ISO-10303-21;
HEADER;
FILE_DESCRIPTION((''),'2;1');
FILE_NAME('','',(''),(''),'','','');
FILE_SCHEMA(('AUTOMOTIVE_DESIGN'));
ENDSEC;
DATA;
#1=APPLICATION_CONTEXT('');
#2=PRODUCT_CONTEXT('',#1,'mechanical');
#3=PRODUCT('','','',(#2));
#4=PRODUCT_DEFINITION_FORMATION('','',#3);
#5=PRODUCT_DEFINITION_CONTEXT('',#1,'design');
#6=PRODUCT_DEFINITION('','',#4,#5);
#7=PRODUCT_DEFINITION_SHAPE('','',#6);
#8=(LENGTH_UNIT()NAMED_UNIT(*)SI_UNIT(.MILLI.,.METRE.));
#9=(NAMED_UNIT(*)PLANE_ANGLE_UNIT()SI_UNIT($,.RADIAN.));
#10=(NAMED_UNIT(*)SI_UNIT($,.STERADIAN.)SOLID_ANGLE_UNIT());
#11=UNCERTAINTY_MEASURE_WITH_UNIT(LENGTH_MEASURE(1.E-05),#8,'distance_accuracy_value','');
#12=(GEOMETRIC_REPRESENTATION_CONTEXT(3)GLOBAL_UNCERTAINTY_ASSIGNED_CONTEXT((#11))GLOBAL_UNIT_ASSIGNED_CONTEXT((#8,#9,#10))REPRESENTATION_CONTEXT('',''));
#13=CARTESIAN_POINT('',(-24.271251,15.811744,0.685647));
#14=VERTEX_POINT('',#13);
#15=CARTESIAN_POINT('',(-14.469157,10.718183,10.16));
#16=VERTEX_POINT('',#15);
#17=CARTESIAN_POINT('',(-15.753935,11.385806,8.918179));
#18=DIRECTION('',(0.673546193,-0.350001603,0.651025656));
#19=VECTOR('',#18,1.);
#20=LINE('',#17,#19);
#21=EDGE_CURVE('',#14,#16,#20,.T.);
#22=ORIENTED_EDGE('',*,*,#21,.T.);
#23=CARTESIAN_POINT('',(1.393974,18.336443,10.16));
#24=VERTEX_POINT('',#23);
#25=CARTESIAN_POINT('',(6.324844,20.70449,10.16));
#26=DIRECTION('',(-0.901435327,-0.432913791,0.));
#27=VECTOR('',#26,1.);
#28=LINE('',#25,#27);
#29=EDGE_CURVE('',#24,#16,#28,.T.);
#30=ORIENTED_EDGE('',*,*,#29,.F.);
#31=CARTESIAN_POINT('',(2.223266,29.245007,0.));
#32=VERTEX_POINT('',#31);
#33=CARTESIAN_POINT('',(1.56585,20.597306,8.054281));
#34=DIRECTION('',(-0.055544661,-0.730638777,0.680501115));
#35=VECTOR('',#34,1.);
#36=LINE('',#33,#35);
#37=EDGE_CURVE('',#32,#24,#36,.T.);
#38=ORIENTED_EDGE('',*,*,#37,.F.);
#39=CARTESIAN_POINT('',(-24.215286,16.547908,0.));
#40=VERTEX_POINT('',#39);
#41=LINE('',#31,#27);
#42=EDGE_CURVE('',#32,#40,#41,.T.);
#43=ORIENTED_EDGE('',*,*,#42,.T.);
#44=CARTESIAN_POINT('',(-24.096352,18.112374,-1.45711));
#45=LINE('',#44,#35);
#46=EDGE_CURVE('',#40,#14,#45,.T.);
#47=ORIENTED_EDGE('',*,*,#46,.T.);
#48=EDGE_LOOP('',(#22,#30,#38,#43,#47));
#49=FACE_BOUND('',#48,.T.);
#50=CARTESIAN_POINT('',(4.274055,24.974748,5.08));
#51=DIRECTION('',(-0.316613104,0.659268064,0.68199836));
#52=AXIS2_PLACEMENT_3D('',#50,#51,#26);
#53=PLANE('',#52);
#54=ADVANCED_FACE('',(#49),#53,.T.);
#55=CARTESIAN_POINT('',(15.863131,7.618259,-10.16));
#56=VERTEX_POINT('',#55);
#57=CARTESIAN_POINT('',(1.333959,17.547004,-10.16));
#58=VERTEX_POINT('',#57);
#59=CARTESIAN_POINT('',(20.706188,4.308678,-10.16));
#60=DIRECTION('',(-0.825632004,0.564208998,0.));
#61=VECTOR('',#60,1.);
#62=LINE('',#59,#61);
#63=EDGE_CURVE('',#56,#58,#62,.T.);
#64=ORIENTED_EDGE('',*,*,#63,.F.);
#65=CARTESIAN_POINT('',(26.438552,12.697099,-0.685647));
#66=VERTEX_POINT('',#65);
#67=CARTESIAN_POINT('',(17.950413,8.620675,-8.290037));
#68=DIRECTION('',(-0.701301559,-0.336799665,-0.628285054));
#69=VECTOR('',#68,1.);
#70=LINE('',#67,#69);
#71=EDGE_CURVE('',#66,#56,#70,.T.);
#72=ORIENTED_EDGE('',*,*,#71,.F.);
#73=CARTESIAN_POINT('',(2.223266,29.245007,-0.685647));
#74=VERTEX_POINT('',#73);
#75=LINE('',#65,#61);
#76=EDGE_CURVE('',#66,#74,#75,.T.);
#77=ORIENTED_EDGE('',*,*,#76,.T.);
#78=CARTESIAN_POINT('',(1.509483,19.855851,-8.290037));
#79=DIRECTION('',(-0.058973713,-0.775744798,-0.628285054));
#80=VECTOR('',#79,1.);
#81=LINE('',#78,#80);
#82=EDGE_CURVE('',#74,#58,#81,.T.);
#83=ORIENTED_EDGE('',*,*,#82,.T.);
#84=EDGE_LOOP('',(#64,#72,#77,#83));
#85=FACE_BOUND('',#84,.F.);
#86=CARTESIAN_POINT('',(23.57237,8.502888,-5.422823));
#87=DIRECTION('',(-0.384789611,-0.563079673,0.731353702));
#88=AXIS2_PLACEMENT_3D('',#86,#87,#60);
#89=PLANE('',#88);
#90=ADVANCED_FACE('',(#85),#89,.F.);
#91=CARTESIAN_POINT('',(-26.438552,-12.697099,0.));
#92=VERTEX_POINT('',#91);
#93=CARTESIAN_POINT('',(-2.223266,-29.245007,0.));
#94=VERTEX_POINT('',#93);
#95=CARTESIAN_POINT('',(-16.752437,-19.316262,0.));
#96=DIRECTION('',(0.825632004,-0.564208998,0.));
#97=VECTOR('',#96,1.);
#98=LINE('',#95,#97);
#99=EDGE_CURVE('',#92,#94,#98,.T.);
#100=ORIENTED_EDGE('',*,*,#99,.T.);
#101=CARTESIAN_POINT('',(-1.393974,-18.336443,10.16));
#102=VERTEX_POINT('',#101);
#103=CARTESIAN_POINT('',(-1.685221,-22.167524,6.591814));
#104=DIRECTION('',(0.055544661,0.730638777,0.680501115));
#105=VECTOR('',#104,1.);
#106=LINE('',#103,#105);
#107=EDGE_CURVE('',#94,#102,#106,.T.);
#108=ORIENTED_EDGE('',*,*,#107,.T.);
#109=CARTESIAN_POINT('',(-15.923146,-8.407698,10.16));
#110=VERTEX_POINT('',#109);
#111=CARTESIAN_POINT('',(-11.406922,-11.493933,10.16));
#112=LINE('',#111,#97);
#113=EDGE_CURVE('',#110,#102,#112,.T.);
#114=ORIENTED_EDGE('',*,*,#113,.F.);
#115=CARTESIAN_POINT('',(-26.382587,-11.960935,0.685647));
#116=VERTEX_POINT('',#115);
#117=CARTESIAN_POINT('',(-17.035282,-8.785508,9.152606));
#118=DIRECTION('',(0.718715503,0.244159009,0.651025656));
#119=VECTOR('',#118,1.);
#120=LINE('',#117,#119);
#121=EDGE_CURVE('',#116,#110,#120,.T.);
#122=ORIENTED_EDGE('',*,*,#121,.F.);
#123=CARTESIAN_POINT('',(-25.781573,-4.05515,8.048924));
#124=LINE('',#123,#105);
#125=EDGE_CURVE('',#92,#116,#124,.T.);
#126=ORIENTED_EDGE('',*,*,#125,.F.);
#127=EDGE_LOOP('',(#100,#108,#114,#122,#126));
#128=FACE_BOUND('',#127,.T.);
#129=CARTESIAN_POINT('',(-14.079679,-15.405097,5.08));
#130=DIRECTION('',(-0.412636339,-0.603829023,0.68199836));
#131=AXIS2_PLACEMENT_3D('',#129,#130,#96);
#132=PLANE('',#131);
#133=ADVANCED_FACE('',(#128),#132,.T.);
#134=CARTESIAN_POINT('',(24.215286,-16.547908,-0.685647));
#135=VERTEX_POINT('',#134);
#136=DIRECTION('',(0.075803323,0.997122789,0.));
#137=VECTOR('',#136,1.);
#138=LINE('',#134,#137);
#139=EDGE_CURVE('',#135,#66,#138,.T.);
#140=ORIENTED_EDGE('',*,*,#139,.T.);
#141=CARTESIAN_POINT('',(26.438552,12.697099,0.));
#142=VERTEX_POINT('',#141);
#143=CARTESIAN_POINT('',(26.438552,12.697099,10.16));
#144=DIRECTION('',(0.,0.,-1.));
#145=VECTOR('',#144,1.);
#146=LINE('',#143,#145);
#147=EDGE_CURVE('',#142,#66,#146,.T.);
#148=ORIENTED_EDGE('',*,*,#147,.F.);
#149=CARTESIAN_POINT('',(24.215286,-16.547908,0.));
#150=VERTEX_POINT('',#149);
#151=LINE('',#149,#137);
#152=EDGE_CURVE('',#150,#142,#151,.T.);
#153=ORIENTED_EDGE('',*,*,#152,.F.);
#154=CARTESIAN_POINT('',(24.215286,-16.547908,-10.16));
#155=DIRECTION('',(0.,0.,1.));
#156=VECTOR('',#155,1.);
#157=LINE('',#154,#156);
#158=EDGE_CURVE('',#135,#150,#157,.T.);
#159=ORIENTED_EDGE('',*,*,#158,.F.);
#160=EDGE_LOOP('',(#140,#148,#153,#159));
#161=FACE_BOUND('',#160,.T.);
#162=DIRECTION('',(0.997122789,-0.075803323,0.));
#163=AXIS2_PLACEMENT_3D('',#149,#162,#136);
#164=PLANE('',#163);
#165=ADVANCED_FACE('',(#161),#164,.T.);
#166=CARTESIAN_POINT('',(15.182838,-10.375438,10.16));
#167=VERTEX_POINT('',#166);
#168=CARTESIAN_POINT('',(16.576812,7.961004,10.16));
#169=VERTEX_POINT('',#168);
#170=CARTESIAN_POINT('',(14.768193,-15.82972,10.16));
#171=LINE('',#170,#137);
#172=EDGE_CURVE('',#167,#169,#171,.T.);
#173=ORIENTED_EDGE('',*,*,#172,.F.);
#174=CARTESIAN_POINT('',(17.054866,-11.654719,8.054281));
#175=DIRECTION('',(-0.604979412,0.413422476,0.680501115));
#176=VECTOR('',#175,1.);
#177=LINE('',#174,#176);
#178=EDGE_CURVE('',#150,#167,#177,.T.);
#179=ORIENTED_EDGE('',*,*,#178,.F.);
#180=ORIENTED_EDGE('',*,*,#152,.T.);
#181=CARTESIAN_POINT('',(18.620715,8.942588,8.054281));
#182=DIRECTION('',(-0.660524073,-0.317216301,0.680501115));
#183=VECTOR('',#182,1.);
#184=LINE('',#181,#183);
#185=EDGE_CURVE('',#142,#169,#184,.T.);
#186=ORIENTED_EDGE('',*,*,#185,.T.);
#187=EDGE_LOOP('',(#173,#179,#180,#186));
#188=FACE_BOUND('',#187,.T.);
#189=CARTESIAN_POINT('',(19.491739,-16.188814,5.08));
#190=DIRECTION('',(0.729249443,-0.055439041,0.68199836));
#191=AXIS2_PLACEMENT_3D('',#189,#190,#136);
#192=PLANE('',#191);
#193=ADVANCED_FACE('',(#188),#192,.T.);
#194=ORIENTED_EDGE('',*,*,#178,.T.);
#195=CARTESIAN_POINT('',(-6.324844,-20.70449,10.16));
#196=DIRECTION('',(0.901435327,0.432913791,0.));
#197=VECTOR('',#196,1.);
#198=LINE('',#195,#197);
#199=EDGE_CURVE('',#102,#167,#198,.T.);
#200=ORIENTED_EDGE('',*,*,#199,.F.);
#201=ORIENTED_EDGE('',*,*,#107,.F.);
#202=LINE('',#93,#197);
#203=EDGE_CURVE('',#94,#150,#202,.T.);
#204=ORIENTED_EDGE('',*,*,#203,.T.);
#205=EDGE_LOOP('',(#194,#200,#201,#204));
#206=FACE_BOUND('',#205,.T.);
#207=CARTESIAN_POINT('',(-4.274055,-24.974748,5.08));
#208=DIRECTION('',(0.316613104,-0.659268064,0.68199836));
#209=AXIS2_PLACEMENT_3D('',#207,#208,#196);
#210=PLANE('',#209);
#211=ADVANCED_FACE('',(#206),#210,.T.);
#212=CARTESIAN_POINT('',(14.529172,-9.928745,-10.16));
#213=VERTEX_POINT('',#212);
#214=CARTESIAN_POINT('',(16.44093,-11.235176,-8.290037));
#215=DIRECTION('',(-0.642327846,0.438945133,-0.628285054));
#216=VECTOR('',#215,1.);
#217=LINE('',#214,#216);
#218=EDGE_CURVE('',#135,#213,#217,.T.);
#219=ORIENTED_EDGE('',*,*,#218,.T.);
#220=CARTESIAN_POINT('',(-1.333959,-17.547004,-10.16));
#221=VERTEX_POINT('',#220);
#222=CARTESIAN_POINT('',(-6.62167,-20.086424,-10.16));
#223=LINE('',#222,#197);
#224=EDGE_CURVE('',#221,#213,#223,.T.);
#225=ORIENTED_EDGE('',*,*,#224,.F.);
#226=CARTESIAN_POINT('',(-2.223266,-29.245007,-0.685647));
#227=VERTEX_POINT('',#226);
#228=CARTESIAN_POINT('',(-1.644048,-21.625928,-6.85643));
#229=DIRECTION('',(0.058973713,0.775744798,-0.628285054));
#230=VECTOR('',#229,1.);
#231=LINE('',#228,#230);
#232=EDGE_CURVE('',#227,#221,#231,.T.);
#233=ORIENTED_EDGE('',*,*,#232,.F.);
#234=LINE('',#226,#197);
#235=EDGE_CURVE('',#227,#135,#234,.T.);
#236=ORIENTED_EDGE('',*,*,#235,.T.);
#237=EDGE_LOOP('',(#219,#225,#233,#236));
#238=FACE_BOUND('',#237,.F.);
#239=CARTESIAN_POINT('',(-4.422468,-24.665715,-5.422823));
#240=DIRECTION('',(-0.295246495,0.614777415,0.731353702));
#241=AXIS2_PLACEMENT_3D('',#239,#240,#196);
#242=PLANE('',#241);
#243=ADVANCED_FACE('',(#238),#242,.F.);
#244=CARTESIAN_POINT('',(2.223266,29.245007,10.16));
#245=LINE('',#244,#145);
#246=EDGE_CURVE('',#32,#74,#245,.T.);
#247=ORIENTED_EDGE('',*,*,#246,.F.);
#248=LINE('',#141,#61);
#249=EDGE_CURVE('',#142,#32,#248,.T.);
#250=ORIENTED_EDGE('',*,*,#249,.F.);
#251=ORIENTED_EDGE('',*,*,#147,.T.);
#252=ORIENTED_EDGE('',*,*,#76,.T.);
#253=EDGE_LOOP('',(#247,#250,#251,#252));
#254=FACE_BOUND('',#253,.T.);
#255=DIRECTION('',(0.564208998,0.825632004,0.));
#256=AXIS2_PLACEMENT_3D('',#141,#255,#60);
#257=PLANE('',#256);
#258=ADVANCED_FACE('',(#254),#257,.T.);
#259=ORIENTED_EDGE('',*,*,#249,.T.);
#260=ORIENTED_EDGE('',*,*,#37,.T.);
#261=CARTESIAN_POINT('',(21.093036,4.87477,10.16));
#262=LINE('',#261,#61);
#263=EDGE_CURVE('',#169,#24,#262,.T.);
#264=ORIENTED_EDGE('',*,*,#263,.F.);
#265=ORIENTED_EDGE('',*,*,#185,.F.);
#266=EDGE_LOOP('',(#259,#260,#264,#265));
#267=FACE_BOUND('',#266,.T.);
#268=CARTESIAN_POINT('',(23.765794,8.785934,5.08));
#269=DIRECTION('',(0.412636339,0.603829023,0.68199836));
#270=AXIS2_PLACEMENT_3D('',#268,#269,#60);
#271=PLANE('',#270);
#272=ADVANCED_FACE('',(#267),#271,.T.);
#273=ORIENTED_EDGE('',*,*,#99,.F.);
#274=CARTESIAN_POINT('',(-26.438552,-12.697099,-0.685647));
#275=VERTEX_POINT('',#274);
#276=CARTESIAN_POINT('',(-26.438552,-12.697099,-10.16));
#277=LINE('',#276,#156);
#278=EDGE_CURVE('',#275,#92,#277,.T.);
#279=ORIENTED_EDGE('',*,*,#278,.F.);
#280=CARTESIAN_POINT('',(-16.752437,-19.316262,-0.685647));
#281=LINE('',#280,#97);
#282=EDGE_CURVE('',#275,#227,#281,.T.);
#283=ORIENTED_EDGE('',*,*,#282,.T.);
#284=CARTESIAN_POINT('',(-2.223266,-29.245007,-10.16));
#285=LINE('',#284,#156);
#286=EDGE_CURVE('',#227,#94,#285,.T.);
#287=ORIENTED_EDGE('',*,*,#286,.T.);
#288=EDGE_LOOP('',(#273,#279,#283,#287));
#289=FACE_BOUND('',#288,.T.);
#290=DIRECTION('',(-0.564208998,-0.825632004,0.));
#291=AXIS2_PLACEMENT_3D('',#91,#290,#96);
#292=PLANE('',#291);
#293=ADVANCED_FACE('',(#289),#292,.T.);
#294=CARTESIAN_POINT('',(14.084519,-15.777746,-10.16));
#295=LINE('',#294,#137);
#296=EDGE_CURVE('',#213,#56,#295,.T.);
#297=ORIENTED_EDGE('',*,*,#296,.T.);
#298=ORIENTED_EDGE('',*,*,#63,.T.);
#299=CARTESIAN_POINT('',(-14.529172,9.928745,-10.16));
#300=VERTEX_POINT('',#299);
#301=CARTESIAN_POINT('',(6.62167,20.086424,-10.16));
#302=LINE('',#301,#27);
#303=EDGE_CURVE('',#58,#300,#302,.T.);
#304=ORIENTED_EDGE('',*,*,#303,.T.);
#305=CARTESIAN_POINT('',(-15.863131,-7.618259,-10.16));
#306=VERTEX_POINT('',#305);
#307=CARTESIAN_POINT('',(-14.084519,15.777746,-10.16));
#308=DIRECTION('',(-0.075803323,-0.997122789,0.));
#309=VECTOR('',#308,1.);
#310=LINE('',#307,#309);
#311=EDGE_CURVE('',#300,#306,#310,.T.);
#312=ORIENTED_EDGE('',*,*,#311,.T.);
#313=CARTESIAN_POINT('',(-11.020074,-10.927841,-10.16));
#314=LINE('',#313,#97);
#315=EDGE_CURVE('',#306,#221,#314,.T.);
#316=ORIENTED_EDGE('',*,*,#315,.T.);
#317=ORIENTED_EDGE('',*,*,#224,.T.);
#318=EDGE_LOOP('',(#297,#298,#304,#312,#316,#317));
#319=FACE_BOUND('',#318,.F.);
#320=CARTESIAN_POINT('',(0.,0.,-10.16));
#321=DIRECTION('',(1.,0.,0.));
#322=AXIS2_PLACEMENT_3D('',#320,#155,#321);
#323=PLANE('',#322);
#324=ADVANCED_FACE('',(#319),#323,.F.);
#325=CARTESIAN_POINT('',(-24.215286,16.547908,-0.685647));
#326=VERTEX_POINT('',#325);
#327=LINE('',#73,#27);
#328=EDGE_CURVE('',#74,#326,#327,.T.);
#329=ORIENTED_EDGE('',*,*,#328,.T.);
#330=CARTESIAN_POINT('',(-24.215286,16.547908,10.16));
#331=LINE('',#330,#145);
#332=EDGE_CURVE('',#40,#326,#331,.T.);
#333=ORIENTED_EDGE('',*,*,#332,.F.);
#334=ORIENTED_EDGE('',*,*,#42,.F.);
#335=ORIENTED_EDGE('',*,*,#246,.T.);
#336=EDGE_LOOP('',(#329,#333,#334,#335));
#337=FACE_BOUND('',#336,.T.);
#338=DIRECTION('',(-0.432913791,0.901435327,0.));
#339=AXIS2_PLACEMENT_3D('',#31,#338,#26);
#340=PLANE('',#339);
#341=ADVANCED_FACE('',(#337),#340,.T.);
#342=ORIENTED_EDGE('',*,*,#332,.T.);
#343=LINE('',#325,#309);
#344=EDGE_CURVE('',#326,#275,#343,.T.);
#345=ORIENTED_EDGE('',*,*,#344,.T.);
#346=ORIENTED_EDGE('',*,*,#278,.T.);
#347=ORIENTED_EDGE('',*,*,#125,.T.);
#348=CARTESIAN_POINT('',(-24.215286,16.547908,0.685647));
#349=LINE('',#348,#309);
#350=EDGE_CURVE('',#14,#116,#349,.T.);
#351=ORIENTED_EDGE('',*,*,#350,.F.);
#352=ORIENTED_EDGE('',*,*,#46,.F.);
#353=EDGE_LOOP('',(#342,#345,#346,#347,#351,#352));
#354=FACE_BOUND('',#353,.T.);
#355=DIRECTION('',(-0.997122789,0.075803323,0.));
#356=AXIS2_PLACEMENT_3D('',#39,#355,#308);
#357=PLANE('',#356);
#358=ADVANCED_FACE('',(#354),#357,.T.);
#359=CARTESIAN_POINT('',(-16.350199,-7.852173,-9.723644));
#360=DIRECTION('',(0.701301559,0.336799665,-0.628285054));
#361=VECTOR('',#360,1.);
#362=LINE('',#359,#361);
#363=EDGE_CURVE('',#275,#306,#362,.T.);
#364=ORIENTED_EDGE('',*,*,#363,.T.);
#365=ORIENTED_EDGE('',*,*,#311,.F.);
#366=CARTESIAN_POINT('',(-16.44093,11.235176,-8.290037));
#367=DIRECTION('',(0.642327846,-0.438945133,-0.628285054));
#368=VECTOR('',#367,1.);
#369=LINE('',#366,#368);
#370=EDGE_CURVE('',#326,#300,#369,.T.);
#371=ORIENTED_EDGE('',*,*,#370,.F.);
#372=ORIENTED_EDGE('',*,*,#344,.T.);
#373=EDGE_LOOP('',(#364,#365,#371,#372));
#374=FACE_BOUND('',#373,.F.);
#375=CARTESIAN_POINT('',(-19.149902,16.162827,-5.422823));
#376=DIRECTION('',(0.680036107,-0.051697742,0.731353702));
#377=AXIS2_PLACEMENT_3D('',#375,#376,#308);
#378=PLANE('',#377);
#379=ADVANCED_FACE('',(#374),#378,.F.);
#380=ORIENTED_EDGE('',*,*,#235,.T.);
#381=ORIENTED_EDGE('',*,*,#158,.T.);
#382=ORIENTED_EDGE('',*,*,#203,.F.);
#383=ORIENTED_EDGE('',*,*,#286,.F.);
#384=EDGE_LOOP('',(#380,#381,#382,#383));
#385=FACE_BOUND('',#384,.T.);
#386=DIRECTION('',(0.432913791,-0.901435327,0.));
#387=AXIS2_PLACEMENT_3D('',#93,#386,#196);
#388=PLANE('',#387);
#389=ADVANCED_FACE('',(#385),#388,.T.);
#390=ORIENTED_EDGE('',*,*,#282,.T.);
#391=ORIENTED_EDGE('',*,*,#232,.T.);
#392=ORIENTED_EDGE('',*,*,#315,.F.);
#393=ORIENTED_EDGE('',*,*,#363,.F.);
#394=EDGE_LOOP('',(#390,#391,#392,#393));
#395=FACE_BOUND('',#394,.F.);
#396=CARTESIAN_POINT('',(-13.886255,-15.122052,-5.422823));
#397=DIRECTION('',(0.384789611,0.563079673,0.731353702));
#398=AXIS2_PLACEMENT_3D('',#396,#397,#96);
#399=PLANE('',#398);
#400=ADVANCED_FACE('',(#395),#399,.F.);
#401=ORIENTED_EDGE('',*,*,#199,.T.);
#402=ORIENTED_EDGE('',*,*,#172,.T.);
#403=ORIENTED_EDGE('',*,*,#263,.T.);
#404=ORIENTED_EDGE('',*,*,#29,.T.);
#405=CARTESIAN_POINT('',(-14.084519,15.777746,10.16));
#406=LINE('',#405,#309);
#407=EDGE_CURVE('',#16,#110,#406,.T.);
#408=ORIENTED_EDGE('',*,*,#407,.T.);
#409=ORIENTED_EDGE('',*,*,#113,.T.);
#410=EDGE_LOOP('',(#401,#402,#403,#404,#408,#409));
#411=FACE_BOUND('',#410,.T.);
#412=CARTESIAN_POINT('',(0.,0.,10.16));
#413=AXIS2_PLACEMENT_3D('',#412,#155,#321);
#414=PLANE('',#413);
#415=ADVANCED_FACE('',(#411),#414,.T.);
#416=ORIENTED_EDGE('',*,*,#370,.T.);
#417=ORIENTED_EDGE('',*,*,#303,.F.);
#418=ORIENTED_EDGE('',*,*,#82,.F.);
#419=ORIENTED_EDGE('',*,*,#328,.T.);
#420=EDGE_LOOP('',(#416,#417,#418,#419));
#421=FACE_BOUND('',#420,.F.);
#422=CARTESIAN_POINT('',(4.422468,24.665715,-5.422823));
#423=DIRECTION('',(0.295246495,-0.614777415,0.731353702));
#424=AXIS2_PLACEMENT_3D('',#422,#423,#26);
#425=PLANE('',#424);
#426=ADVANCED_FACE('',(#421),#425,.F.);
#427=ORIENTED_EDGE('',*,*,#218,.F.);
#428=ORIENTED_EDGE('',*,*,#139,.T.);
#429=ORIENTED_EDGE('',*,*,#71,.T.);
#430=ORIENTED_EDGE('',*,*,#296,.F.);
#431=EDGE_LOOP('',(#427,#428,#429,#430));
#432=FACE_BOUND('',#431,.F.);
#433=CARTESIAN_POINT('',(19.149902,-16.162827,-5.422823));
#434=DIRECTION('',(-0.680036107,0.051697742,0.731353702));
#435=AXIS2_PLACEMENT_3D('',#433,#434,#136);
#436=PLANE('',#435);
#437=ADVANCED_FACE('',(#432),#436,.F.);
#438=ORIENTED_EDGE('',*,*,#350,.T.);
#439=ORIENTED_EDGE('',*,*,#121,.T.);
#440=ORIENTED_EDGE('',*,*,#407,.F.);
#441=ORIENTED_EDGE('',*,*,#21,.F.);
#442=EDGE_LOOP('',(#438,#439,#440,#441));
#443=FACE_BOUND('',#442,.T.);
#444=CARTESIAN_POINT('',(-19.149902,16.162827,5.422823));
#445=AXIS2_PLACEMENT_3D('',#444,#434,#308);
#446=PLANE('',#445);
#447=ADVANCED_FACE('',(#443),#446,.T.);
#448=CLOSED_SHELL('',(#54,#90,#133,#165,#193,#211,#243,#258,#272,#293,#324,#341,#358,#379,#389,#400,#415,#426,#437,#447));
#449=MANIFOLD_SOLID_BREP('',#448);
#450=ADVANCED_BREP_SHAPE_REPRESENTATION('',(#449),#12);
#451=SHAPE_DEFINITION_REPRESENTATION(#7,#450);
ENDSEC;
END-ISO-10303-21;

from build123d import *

# Parameters (mm, degrees)
F1_DEPTH     = 10.16
F2_C1_SIZE2  = 10.16
F2_C1_SIZE   = 9.4743532752
F2_C2_SIZE2  = 10.16
F2_C2_SIZE   = 9.4743532752
F2_C3_SIZE2  = 10.16
F2_C3_SIZE   = 9.4743532752
F2_C4_SIZE2  = 9.4743532752
F2_C4_SIZE   = 10.16
F2_C5_SIZE2  = 10.16
F2_C5_SIZE   = 9.4743532752
F2_C6_SIZE2  = 9.4743532752
F2_C6_SIZE   = 10.16
F2_C7_SIZE2  = 10.16
F2_C7_SIZE   = 9.4743532752
F2_C8_SIZE2  = 9.4743532752
F2_C8_SIZE   = 10.16
F2_C9_SIZE2  = 10.16
F2_C9_SIZE   = 9.4743532752
F2_C10_SIZE2 = 9.4743532752
F2_C10_SIZE  = 10.16
F2_C11_SIZE2 = 9.4743532752
F2_C11_SIZE  = 10.16
F2_C12_SIZE2 = 10.16
F2_C12_SIZE  = 9.4743532752


with BuildPart() as f1:
    # F0 (on Top) → F1 (new body, symmetric)
    with BuildSketch(Plane.XY):
        Polygon((-24.2152860866, 16.5479078158), (-26.4385515912, -12.697099003), (-2.2232655046, -29.2450068188), (24.2152860866, -16.5479078158), (26.4385515912, 12.697099003), (2.2232655046, 29.2450068188), align=None)
    extrude(amount=F1_DEPTH, both=True)

    # F2: chamfer of 10.16 x 9.4743532752 on 12 edges, made by hand

    # F2_c1
    f2_c1_edges = [f1.edges().sort_by_distance(p)[0] for p in [
        (-25.3269188389, 1.9254044064, -10.16),
    ]]
    f2_c1_side = f1.faces().sort_by_distance((-25.3269188389, 1.9254044064, -9.9705129345))[0]
    chamfer(f2_c1_edges, length=F2_C1_SIZE, length2=F2_C1_SIZE2, reference=f2_c1_side)

    # F2_c2
    f2_c2_edges = [f1.edges().sort_by_distance(p)[0] for p in [
        (-25.3269188389, 1.9254044064, 10.16),
    ]]
    f2_c2_side = f1.faces().sort_by_distance((-25.3269188389, 1.9254044064, 9.9705129345))[0]
    chamfer(f2_c2_edges, length=F2_C2_SIZE, length2=F2_C2_SIZE2, reference=f2_c2_side)

    # F2_c3
    f2_c3_edges = [f1.edges().sort_by_distance(p)[0] for p in [
        (-5.7082999727, 25.4358771179, -10.16),
    ]]
    f2_c3_side = f1.faces().sort_by_distance((-5.7082999727, 25.4358771179, -9.9705129345))[0]
    chamfer(f2_c3_edges, length=F2_C3_SIZE, length2=F2_C3_SIZE2, reference=f2_c3_side)

    # F2_c4
    f2_c4_edges = [f1.edges().sort_by_distance(p)[0] for p in [
        (-5.7082999727, 25.4358771179, 10.16),
    ]]
    f2_c4_side = f1.faces().sort_by_distance((-5.7082999727, 25.4358771179, 9.9705129345))[0]
    chamfer(f2_c4_edges, length=F2_C4_SIZE, length2=F2_C4_SIZE2, reference=f2_c4_side)

    # F2_c5
    f2_c5_edges = [f1.edges().sort_by_distance(p)[0] for p in [
        (19.1739657652, 17.6614713477, -10.16),
    ]]
    f2_c5_side = f1.faces().sort_by_distance((19.1739657652, 17.6614713477, -9.9705129345))[0]
    chamfer(f2_c5_edges, length=F2_C5_SIZE, length2=F2_C5_SIZE2, reference=f2_c5_side)

    # F2_c6
    f2_c6_edges = [f1.edges().sort_by_distance(p)[0] for p in [
        (18.8471324661, 17.8848181744, 10.16),
    ]]
    f2_c6_side = f1.faces().sort_by_distance((18.8471324661, 17.8848181744, 9.9705129345))[0]
    chamfer(f2_c6_edges, length=F2_C6_SIZE, length2=F2_C6_SIZE2, reference=f2_c6_side)

    # F2_c7
    f2_c7_edges = [f1.edges().sort_by_distance(p)[0] for p in [
        (24.882265738, -7.7744057701, -10.16),
    ]]
    f2_c7_side = f1.faces().sort_by_distance((24.882265738, -7.7744057701, -9.9705129345))[0]
    chamfer(f2_c7_edges, length=F2_C7_SIZE, length2=F2_C7_SIZE2, reference=f2_c7_side)

    # F2_c8
    f2_c8_edges = [f1.edges().sort_by_distance(p)[0] for p in [
        (24.9122731142, -7.3796864169, 10.16),
    ]]
    f2_c8_side = f1.faces().sort_by_distance((24.9122731142, -7.3796864169, 9.9705129345))[0]
    chamfer(f2_c8_edges, length=F2_C8_SIZE, length2=F2_C8_SIZE2, reference=f2_c8_side)

    # F2_c9
    f2_c9_edges = [f1.edges().sort_by_distance(p)[0] for p in [
        (5.7082999727, -25.4358771179, -10.16),
    ]]
    f2_c9_side = f1.faces().sort_by_distance((5.7082999727, -25.4358771179, -9.9705129345))[0]
    chamfer(f2_c9_edges, length=F2_C9_SIZE, length2=F2_C9_SIZE2, reference=f2_c9_side)

    # F2_c10
    f2_c10_edges = [f1.edges().sort_by_distance(p)[0] for p in [
        (6.0651406481, -25.2645045914, 10.16),
    ]]
    f2_c10_side = f1.faces().sort_by_distance((6.0651406481, -25.2645045914, 9.9705129345))[0]
    chamfer(f2_c10_edges, length=F2_C10_SIZE, length2=F2_C10_SIZE2, reference=f2_c10_side)

    # F2_c11
    f2_c11_edges = [f1.edges().sort_by_distance(p)[0] for p in [
        (-14.0040752488, -21.1943997376, 10.16),
    ]]
    f2_c11_side = f1.faces().sort_by_distance((-14.0040752488, -21.1943997376, 9.9705129345))[0]
    chamfer(f2_c11_edges, length=F2_C11_SIZE, length2=F2_C11_SIZE2, reference=f2_c11_side)

    # F2_c12
    f2_c12_edges = [f1.edges().sort_by_distance(p)[0] for p in [
        (-14.3309085479, -20.9710529109, -10.16),
    ]]
    f2_c12_side = f1.faces().sort_by_distance((-14.3309085479, -20.9710529109, -9.9705129345))[0]
    chamfer(f2_c12_edges, length=F2_C12_SIZE, length2=F2_C12_SIZE2, reference=f2_c12_side)


solid = f1.part
